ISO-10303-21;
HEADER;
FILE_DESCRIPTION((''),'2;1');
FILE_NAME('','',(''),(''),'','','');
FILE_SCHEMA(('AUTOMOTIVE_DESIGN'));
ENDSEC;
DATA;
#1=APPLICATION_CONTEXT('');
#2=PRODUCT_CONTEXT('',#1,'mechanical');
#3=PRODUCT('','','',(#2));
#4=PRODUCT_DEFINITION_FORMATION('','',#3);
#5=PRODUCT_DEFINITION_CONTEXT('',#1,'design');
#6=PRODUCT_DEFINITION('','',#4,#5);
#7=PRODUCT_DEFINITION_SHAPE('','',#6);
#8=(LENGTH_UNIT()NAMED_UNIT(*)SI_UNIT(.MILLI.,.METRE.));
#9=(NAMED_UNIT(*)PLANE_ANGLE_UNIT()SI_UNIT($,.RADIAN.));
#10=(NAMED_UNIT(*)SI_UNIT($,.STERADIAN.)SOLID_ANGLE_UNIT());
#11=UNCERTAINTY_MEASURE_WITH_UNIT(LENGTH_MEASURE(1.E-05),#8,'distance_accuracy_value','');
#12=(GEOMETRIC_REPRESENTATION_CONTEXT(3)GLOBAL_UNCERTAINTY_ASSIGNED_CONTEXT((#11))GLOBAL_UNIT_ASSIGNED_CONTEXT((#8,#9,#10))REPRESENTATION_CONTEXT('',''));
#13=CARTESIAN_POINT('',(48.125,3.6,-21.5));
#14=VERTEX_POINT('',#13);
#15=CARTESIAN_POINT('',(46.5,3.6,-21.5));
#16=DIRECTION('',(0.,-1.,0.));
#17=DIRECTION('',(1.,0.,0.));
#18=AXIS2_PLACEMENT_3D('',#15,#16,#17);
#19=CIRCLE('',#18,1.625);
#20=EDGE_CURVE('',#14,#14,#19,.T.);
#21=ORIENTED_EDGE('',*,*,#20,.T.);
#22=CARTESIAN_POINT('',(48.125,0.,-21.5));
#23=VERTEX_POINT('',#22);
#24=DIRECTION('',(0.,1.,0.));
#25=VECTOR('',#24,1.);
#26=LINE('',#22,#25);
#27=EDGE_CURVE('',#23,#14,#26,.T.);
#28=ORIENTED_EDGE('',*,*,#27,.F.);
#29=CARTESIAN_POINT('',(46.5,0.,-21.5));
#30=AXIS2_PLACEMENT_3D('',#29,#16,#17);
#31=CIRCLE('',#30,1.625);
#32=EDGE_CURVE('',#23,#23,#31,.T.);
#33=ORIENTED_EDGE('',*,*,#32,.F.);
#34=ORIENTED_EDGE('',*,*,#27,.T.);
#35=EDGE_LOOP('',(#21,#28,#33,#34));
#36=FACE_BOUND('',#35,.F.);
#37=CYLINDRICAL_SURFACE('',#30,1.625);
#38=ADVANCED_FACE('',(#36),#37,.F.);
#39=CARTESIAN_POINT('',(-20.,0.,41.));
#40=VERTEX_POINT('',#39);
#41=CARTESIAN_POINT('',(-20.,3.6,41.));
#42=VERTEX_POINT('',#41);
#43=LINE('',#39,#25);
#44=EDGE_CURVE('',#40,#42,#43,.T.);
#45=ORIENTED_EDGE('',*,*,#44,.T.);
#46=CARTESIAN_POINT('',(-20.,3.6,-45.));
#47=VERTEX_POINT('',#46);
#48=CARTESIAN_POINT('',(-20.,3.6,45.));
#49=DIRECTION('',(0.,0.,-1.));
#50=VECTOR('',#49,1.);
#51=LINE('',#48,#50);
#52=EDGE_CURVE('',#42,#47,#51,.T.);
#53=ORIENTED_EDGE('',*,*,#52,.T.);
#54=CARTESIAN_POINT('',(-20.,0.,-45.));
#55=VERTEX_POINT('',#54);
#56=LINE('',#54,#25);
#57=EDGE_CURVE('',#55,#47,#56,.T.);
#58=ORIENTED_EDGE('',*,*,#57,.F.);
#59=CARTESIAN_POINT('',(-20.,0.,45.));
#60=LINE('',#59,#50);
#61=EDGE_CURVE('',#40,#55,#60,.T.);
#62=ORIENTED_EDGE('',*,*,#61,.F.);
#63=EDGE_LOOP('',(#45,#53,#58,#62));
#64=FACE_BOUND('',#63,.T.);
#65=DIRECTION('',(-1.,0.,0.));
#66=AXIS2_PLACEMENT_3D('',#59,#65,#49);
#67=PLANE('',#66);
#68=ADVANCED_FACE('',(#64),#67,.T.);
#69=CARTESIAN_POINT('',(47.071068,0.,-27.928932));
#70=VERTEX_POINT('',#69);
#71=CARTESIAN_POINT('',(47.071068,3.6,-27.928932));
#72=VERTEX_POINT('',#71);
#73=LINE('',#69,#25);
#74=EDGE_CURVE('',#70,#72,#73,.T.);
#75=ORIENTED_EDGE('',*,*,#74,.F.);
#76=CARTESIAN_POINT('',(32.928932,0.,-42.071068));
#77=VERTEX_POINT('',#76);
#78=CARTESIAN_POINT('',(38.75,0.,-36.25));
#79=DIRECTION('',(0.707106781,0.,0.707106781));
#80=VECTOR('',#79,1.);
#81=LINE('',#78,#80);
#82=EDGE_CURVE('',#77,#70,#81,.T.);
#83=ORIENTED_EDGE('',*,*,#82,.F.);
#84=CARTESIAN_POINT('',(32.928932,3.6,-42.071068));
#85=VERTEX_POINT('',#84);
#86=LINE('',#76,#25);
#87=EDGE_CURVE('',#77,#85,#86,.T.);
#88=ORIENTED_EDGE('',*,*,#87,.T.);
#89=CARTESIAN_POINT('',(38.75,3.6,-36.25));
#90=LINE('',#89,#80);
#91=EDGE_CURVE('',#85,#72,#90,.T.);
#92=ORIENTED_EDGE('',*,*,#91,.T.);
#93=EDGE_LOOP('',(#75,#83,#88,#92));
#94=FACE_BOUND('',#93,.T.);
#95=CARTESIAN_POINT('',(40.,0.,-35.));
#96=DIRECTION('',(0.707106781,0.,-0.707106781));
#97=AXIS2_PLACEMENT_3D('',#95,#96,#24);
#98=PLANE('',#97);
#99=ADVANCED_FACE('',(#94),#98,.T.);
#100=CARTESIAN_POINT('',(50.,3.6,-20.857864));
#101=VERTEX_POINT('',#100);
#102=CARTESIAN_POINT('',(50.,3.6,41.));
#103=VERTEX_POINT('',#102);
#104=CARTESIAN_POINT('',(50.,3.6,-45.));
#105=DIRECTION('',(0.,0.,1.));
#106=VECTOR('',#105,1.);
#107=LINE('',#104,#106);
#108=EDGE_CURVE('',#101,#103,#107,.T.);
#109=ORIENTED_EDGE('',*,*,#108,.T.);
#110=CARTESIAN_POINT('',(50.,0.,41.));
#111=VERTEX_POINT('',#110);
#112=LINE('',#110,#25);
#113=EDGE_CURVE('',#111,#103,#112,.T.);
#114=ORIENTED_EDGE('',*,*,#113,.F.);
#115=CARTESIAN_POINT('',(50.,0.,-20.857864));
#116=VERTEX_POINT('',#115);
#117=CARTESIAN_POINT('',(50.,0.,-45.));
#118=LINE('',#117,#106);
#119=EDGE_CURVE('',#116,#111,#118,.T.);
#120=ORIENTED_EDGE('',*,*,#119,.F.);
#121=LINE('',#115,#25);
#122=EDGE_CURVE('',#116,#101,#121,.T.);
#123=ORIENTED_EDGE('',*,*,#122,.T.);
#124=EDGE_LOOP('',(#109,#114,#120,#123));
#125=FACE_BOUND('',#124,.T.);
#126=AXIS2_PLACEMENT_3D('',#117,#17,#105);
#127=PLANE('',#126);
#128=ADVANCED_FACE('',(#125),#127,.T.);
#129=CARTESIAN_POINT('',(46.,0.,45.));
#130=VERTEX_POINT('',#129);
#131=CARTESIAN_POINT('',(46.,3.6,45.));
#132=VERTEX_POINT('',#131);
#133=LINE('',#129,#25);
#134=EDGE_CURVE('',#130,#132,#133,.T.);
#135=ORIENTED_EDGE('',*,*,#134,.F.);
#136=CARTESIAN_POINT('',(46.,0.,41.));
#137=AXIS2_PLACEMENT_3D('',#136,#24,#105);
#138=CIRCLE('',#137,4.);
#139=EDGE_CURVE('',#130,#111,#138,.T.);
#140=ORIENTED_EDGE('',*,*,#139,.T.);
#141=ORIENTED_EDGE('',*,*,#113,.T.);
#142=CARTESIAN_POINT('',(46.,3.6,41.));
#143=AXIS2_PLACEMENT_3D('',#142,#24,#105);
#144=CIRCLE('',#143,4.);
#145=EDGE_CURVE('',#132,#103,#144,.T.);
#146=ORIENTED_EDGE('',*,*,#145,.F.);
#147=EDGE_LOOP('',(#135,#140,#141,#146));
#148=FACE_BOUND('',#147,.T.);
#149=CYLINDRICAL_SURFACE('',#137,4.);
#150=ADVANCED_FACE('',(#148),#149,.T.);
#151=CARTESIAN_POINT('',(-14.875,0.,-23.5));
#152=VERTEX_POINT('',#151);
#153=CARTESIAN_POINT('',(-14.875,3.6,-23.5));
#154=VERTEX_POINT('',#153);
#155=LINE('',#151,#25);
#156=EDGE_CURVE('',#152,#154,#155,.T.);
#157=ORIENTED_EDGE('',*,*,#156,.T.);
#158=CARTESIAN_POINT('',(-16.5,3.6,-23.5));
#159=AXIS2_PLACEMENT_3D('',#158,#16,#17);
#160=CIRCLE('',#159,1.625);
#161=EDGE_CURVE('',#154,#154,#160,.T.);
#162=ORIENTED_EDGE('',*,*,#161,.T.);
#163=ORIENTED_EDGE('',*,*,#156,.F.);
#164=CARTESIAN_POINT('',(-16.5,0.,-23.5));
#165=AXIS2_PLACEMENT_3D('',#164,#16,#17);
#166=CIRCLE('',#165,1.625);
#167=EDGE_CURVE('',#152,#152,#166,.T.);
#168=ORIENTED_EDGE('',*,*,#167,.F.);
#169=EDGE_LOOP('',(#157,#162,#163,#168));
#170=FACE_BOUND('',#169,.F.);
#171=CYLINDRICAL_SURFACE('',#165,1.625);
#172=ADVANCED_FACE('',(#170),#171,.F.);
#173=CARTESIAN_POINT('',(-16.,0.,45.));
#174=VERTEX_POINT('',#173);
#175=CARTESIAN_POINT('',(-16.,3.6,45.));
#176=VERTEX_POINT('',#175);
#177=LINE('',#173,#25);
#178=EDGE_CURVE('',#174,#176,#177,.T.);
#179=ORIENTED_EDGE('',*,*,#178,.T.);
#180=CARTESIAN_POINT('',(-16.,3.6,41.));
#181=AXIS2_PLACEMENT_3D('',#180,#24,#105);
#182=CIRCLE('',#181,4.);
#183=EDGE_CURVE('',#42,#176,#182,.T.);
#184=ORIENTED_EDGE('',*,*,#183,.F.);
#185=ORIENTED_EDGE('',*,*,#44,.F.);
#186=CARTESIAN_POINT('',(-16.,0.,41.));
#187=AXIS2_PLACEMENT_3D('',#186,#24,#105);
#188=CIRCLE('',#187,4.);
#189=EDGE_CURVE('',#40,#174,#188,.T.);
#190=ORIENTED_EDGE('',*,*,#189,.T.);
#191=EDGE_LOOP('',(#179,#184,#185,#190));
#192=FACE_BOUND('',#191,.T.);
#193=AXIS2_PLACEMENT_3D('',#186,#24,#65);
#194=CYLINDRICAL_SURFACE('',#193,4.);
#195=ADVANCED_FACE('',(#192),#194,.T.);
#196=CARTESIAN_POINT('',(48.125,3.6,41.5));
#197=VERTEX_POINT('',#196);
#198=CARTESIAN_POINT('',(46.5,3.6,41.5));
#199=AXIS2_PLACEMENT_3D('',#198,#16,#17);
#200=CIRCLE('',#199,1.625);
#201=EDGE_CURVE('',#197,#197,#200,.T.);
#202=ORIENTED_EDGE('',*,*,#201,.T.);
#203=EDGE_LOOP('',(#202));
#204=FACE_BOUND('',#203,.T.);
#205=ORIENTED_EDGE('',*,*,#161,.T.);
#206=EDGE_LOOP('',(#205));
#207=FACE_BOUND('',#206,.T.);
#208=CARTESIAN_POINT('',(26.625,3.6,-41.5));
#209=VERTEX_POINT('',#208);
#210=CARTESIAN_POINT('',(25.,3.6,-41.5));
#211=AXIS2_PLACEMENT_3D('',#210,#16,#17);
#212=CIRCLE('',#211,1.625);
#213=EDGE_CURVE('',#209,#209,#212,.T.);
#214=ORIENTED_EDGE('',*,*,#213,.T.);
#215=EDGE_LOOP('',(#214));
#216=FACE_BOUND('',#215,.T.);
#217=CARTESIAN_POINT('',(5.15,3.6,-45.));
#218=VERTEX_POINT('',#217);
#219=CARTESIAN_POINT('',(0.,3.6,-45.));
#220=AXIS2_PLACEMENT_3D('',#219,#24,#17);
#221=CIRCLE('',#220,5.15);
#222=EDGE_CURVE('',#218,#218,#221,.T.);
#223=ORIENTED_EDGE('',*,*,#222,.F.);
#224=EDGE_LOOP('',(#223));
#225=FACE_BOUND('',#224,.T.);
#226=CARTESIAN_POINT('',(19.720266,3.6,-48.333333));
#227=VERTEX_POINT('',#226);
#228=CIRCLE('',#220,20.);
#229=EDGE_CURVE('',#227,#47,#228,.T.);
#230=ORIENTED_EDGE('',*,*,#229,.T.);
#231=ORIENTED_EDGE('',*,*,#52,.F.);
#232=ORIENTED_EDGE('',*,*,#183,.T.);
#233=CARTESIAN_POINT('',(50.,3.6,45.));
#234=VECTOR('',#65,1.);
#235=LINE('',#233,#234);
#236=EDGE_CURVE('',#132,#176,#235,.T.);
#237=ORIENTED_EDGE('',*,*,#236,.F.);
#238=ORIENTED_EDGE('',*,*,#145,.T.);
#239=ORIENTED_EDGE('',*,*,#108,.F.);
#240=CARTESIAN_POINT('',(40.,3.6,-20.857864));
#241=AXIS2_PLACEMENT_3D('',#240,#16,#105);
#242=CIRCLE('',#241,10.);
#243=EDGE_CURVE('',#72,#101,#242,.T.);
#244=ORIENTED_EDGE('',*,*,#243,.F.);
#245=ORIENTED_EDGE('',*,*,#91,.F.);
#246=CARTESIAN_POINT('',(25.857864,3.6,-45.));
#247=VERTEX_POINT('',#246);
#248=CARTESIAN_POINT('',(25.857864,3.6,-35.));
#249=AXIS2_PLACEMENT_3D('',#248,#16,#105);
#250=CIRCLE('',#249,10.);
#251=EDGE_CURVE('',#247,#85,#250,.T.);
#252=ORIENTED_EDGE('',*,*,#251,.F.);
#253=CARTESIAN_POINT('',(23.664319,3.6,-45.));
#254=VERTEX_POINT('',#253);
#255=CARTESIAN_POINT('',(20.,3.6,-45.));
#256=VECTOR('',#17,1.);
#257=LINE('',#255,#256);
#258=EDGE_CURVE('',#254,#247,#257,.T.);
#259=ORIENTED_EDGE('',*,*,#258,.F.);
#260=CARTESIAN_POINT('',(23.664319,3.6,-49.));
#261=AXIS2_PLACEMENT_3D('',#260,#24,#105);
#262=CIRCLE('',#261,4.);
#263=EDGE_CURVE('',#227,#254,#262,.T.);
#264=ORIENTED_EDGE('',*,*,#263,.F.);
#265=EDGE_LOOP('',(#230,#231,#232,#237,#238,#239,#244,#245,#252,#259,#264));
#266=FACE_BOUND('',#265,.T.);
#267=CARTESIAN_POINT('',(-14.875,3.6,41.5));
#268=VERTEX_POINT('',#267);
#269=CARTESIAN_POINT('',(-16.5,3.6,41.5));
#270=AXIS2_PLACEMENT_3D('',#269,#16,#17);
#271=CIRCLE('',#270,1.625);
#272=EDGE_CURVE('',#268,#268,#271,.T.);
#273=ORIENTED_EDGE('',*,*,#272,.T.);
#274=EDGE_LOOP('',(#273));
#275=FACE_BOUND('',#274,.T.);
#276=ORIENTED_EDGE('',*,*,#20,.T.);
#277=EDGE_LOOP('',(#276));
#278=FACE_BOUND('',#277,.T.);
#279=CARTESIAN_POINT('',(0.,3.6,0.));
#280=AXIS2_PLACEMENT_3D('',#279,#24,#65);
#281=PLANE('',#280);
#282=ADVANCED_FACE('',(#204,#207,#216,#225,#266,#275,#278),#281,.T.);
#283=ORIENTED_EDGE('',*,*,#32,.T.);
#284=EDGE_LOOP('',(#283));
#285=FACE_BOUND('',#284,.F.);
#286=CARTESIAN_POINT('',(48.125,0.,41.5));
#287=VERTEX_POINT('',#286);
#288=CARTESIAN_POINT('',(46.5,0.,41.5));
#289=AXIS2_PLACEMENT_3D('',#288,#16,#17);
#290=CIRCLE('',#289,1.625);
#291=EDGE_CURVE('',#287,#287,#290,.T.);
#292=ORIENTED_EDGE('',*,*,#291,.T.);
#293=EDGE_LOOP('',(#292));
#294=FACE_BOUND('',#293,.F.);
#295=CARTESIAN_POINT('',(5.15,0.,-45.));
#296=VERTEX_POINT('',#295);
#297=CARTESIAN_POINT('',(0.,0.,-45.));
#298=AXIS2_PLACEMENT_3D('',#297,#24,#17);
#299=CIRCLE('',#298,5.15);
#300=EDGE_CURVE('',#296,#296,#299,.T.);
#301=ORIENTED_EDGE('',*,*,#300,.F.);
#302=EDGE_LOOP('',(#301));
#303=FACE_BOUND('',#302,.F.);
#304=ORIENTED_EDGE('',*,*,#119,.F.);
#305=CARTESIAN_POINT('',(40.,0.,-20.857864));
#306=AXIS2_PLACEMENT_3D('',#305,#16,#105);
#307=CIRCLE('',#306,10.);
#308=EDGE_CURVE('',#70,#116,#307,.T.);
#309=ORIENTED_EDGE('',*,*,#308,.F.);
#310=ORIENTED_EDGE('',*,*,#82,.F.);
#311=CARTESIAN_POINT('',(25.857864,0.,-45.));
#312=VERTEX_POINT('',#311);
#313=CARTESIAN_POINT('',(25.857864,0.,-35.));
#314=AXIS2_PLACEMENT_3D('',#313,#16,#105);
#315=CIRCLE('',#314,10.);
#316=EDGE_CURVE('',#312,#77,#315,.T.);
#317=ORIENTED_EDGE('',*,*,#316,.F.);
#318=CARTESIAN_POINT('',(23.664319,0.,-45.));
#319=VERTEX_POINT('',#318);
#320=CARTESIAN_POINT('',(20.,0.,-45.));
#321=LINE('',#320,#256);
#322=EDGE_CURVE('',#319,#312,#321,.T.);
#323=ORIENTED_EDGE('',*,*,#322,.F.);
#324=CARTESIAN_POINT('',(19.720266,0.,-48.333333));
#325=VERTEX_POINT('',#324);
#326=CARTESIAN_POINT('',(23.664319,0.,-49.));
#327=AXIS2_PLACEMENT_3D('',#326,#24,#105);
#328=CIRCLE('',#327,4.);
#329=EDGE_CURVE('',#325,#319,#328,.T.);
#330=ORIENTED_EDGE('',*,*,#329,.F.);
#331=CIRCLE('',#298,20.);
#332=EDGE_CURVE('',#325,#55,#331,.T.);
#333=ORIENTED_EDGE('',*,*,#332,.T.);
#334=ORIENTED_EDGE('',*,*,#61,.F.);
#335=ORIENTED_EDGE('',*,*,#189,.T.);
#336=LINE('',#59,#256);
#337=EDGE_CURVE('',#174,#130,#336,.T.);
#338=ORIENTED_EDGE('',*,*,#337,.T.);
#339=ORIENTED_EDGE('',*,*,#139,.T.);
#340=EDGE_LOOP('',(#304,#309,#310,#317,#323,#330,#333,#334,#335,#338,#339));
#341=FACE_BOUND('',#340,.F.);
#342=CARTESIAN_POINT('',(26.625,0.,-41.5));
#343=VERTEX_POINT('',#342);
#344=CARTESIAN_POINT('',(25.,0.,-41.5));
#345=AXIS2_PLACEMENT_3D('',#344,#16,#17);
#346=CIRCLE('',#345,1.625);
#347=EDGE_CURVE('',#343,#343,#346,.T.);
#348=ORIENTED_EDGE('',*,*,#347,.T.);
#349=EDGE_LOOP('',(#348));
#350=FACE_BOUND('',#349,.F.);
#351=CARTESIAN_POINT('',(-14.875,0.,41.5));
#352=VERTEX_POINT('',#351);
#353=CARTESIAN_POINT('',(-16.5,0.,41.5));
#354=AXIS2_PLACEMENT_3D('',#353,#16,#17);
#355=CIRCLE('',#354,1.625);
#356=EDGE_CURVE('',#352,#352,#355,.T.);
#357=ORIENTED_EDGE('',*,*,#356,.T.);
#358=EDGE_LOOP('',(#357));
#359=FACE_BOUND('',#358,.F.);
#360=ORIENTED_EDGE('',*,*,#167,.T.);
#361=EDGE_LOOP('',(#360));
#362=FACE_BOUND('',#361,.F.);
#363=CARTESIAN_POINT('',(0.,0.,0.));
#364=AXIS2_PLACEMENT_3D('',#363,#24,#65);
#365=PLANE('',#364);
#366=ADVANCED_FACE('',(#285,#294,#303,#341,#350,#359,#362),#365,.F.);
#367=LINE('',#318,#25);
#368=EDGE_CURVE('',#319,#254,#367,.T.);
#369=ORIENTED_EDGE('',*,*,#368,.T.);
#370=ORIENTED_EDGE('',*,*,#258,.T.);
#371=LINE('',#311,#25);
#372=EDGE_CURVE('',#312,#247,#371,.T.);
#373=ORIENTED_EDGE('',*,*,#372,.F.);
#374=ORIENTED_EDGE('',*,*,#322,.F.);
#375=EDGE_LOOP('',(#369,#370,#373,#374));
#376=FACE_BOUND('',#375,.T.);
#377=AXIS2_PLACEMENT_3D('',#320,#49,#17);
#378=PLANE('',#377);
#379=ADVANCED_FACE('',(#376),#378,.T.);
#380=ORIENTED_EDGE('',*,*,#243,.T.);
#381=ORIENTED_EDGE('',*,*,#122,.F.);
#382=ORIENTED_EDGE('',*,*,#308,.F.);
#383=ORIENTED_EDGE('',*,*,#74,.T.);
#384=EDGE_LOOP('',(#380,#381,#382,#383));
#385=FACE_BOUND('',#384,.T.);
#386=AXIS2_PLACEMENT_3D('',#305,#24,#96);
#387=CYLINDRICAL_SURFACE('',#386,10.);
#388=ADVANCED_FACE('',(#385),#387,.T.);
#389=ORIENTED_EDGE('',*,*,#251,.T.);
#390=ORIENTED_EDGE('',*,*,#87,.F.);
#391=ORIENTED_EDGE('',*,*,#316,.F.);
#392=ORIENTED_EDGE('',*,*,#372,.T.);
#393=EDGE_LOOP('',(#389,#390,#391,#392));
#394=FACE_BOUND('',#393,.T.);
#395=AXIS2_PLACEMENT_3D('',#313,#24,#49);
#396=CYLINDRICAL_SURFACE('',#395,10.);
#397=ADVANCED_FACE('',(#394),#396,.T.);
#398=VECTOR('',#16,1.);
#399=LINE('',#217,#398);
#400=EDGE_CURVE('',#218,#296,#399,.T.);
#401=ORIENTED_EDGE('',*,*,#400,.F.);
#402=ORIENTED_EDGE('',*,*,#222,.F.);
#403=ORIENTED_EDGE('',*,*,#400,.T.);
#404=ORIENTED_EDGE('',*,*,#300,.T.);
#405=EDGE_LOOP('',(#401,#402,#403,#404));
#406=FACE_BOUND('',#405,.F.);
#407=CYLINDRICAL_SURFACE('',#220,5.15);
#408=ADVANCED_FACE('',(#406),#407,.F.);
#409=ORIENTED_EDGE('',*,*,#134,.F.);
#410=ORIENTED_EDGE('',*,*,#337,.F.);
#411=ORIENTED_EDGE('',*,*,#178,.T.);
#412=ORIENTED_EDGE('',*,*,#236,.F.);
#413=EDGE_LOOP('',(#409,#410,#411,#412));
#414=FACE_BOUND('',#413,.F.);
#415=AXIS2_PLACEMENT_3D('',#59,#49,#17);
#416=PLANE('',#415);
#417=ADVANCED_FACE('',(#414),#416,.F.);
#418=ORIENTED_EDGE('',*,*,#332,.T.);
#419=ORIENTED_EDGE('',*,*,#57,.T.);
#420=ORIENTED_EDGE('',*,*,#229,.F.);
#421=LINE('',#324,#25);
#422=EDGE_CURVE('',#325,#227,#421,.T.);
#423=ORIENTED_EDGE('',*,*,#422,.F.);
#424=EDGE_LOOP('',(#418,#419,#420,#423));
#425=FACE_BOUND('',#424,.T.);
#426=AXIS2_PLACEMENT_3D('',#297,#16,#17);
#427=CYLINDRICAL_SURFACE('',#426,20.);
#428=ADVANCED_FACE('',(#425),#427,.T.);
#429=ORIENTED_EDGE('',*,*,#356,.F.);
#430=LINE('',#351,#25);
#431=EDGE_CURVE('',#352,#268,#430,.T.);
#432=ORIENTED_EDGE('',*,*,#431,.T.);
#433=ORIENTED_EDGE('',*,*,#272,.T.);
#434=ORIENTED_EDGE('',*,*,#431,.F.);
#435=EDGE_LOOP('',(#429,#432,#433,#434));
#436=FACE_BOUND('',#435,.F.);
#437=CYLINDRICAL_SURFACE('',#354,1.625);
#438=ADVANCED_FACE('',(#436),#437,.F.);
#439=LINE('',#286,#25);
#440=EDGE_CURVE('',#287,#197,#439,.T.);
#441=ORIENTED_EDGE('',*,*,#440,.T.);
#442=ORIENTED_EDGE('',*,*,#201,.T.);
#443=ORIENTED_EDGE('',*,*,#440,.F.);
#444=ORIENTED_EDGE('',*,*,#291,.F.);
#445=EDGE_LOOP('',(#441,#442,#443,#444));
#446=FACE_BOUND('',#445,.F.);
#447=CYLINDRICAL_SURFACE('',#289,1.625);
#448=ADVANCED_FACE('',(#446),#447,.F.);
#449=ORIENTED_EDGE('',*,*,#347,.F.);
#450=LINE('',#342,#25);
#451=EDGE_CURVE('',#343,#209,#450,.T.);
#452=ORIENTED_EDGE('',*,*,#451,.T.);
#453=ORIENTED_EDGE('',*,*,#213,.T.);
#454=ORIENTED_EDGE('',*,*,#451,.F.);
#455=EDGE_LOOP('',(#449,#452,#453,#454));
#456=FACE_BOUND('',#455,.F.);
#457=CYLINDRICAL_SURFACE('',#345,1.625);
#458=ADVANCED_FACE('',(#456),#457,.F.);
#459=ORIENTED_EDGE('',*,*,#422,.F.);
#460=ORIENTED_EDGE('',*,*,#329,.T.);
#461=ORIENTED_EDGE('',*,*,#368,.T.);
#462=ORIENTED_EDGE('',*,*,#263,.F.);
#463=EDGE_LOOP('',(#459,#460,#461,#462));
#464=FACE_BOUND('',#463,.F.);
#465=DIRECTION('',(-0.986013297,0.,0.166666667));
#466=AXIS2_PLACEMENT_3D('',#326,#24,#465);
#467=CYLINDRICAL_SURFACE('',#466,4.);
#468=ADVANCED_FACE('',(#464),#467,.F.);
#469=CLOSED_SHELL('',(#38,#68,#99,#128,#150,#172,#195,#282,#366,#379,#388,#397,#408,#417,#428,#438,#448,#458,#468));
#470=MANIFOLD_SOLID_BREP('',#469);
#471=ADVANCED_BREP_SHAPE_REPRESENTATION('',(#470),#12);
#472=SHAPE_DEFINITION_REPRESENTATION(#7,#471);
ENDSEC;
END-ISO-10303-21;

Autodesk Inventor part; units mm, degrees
ref_plane "YZ Plane" through (0, 0, 0) normal (1, 0, 0) x (0, 1, 0)
ref_plane "XZ Plane" through (0, 0, 0) normal (0, 1, 0) x (-1, 0, 0)
ref_plane "XY Plane" through (0, 0, 0) normal (0, 0, 1) x (1, 0, 0)
sketch "Sketch1" plane through (0, 0, 0) normal (0, 1, 0) x (-1, 0, 0)
  line L0 (20, 45) -> (-20, 45)
  line L1 (-20, 45) -> (-20, -45)
  line L2 (-20, -45) -> (20, -45)
  line L3 (20, 45) -> (-20, -45) construction
  line L4 (-20, 45) -> (20, -45) construction
  arc A0 (-20, -45) -> (20, -45) centre (0, -45) ccw
  line L5 (20, 45) -> (20, -45)
  line L6 (-20, -45) -> (-50, -45)
  line L7 (-50, -45) -> (-50, 45)
  line L8 (-50, 45) -> (-20, 45)
  line L9 (-20, 45) -> (-20, -45)
  point P0 (0, 0)
  dimension "d0" = 40
  dimension "d1" = 90
  dimension "d26" = 30
extrude "Extrusion1" add sketch "Sketch1" along normal blind 3.6
sketch "Sketch2" plane through (0, 3.6, 0) normal (0, 1, 0) x (1, 0, 0)
  arc A0 (20, 45) -> (-20, 45) centre (0, 45) ccw projected
  circle A1 centre (0, 45) radius 5.15
  point P0 (0, 0)
  dimension "d4" = 10.3
extrude "Extrusion2" cut sketch "Sketch2" against normal blind 3.6
fillet "Fillet1" radius 4 4 edges at (-20, 1.8, -45) (50, 1.8, 45) (-20, 1.8, 45) (20, 1.8, -45)
chamfer "Chamfer1" distance 20 angle 45 1 edges at (50, 1.8, -45)
fillet "Fillet2" radius 10 2 edges at (30, 1.8, -45) (50, 1.8, -25)
sketch "Sketch5" plane through (0, 0, 0) normal (0, -1, 0) x (1, 0, 0)
  circle A0 centre (25, -41.5) radius 1.625
  circle A1 centre (46.5, -21.5) radius 1.625
  circle A2 centre (46.5, 41.5) radius 1.625
  circle A3 centre (-16.5, -23.5) radius 1.625
  line L0 (25.8579, -45) -> (23.6643, -45) projected
  line L1 (50, 41) -> (50, -20.8579) projected
  line L2 (-20, -45) -> (-20, 41) projected
  line L3 (-16, 45) -> (46, 45) projected
  circle A4 centre (-16.5, 41.5) radius 1.625
  point P0 (0, 0)
  dimension "d31" = 3.25
  dimension "d32" = 3.25
  dimension "d34" = 3.25
  dimension "d35" = 3.25
  dimension "d36" = 3.5
  dimension "d37" = 3.5
  dimension "d38" = 3.5
  dimension "d40" = 25
  dimension "d41" = 20
  dimension "d42" = 3.5
  dimension "d43" = 3.5
  dimension "d48" = 3.25
  dimension "d49" = 3.5
  dimension "d50" = 3.5
  dimension "d52" = 65
extrude "Extrusion5" cut sketch "Sketch5" against normal blind 10
properties part number "p1"
